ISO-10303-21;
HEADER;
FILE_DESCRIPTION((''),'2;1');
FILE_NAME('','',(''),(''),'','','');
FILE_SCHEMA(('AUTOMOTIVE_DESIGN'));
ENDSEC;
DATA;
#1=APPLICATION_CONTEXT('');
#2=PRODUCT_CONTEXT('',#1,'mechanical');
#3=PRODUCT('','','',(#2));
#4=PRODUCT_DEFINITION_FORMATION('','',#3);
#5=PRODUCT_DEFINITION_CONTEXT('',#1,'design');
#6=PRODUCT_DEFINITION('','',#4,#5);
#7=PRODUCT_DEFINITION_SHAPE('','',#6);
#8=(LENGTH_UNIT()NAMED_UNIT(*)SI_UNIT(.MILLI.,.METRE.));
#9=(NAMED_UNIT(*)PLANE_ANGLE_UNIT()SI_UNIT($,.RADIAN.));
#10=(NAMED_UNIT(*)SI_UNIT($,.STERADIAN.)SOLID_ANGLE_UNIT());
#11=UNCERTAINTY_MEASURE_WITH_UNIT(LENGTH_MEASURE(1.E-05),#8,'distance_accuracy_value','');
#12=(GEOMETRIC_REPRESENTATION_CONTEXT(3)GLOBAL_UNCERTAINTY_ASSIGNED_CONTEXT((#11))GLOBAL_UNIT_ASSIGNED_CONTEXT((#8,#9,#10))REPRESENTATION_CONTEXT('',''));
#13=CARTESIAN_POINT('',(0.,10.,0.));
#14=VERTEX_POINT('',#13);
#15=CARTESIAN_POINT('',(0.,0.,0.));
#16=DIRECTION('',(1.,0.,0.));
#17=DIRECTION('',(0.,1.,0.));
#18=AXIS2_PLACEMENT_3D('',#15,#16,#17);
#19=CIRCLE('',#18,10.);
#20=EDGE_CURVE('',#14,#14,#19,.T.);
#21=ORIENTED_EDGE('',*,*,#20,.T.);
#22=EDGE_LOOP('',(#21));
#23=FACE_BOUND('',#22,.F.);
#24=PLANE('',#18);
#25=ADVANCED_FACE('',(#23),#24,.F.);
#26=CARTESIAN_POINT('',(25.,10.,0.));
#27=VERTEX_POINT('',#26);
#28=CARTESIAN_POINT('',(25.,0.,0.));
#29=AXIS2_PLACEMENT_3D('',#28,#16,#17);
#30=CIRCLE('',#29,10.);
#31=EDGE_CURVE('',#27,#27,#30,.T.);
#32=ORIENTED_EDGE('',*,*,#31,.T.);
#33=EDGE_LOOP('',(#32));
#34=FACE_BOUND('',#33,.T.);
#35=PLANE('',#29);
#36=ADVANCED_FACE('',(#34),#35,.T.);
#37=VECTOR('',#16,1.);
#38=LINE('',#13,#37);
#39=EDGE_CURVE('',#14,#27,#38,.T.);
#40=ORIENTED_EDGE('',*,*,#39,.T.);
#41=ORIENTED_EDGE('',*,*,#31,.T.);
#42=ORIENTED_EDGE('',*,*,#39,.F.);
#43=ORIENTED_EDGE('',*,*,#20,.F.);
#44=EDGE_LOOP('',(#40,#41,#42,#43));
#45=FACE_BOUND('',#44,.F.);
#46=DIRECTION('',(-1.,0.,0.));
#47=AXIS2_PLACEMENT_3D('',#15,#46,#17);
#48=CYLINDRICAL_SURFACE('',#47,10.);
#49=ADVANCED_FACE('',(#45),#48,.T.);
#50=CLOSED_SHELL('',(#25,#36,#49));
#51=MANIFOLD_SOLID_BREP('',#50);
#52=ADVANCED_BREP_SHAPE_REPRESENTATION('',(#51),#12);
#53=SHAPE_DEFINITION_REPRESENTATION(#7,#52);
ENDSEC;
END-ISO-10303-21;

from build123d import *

# Parameters (mm, degrees)
F1_R     = 10
F2_DEPTH = 25


with BuildPart() as f2:
    # F1 (on face) → F2 (new body)
    with BuildSketch(Plane.YZ):
        Circle(F1_R)
    extrude(amount=F2_DEPTH)


solid = f2.part
